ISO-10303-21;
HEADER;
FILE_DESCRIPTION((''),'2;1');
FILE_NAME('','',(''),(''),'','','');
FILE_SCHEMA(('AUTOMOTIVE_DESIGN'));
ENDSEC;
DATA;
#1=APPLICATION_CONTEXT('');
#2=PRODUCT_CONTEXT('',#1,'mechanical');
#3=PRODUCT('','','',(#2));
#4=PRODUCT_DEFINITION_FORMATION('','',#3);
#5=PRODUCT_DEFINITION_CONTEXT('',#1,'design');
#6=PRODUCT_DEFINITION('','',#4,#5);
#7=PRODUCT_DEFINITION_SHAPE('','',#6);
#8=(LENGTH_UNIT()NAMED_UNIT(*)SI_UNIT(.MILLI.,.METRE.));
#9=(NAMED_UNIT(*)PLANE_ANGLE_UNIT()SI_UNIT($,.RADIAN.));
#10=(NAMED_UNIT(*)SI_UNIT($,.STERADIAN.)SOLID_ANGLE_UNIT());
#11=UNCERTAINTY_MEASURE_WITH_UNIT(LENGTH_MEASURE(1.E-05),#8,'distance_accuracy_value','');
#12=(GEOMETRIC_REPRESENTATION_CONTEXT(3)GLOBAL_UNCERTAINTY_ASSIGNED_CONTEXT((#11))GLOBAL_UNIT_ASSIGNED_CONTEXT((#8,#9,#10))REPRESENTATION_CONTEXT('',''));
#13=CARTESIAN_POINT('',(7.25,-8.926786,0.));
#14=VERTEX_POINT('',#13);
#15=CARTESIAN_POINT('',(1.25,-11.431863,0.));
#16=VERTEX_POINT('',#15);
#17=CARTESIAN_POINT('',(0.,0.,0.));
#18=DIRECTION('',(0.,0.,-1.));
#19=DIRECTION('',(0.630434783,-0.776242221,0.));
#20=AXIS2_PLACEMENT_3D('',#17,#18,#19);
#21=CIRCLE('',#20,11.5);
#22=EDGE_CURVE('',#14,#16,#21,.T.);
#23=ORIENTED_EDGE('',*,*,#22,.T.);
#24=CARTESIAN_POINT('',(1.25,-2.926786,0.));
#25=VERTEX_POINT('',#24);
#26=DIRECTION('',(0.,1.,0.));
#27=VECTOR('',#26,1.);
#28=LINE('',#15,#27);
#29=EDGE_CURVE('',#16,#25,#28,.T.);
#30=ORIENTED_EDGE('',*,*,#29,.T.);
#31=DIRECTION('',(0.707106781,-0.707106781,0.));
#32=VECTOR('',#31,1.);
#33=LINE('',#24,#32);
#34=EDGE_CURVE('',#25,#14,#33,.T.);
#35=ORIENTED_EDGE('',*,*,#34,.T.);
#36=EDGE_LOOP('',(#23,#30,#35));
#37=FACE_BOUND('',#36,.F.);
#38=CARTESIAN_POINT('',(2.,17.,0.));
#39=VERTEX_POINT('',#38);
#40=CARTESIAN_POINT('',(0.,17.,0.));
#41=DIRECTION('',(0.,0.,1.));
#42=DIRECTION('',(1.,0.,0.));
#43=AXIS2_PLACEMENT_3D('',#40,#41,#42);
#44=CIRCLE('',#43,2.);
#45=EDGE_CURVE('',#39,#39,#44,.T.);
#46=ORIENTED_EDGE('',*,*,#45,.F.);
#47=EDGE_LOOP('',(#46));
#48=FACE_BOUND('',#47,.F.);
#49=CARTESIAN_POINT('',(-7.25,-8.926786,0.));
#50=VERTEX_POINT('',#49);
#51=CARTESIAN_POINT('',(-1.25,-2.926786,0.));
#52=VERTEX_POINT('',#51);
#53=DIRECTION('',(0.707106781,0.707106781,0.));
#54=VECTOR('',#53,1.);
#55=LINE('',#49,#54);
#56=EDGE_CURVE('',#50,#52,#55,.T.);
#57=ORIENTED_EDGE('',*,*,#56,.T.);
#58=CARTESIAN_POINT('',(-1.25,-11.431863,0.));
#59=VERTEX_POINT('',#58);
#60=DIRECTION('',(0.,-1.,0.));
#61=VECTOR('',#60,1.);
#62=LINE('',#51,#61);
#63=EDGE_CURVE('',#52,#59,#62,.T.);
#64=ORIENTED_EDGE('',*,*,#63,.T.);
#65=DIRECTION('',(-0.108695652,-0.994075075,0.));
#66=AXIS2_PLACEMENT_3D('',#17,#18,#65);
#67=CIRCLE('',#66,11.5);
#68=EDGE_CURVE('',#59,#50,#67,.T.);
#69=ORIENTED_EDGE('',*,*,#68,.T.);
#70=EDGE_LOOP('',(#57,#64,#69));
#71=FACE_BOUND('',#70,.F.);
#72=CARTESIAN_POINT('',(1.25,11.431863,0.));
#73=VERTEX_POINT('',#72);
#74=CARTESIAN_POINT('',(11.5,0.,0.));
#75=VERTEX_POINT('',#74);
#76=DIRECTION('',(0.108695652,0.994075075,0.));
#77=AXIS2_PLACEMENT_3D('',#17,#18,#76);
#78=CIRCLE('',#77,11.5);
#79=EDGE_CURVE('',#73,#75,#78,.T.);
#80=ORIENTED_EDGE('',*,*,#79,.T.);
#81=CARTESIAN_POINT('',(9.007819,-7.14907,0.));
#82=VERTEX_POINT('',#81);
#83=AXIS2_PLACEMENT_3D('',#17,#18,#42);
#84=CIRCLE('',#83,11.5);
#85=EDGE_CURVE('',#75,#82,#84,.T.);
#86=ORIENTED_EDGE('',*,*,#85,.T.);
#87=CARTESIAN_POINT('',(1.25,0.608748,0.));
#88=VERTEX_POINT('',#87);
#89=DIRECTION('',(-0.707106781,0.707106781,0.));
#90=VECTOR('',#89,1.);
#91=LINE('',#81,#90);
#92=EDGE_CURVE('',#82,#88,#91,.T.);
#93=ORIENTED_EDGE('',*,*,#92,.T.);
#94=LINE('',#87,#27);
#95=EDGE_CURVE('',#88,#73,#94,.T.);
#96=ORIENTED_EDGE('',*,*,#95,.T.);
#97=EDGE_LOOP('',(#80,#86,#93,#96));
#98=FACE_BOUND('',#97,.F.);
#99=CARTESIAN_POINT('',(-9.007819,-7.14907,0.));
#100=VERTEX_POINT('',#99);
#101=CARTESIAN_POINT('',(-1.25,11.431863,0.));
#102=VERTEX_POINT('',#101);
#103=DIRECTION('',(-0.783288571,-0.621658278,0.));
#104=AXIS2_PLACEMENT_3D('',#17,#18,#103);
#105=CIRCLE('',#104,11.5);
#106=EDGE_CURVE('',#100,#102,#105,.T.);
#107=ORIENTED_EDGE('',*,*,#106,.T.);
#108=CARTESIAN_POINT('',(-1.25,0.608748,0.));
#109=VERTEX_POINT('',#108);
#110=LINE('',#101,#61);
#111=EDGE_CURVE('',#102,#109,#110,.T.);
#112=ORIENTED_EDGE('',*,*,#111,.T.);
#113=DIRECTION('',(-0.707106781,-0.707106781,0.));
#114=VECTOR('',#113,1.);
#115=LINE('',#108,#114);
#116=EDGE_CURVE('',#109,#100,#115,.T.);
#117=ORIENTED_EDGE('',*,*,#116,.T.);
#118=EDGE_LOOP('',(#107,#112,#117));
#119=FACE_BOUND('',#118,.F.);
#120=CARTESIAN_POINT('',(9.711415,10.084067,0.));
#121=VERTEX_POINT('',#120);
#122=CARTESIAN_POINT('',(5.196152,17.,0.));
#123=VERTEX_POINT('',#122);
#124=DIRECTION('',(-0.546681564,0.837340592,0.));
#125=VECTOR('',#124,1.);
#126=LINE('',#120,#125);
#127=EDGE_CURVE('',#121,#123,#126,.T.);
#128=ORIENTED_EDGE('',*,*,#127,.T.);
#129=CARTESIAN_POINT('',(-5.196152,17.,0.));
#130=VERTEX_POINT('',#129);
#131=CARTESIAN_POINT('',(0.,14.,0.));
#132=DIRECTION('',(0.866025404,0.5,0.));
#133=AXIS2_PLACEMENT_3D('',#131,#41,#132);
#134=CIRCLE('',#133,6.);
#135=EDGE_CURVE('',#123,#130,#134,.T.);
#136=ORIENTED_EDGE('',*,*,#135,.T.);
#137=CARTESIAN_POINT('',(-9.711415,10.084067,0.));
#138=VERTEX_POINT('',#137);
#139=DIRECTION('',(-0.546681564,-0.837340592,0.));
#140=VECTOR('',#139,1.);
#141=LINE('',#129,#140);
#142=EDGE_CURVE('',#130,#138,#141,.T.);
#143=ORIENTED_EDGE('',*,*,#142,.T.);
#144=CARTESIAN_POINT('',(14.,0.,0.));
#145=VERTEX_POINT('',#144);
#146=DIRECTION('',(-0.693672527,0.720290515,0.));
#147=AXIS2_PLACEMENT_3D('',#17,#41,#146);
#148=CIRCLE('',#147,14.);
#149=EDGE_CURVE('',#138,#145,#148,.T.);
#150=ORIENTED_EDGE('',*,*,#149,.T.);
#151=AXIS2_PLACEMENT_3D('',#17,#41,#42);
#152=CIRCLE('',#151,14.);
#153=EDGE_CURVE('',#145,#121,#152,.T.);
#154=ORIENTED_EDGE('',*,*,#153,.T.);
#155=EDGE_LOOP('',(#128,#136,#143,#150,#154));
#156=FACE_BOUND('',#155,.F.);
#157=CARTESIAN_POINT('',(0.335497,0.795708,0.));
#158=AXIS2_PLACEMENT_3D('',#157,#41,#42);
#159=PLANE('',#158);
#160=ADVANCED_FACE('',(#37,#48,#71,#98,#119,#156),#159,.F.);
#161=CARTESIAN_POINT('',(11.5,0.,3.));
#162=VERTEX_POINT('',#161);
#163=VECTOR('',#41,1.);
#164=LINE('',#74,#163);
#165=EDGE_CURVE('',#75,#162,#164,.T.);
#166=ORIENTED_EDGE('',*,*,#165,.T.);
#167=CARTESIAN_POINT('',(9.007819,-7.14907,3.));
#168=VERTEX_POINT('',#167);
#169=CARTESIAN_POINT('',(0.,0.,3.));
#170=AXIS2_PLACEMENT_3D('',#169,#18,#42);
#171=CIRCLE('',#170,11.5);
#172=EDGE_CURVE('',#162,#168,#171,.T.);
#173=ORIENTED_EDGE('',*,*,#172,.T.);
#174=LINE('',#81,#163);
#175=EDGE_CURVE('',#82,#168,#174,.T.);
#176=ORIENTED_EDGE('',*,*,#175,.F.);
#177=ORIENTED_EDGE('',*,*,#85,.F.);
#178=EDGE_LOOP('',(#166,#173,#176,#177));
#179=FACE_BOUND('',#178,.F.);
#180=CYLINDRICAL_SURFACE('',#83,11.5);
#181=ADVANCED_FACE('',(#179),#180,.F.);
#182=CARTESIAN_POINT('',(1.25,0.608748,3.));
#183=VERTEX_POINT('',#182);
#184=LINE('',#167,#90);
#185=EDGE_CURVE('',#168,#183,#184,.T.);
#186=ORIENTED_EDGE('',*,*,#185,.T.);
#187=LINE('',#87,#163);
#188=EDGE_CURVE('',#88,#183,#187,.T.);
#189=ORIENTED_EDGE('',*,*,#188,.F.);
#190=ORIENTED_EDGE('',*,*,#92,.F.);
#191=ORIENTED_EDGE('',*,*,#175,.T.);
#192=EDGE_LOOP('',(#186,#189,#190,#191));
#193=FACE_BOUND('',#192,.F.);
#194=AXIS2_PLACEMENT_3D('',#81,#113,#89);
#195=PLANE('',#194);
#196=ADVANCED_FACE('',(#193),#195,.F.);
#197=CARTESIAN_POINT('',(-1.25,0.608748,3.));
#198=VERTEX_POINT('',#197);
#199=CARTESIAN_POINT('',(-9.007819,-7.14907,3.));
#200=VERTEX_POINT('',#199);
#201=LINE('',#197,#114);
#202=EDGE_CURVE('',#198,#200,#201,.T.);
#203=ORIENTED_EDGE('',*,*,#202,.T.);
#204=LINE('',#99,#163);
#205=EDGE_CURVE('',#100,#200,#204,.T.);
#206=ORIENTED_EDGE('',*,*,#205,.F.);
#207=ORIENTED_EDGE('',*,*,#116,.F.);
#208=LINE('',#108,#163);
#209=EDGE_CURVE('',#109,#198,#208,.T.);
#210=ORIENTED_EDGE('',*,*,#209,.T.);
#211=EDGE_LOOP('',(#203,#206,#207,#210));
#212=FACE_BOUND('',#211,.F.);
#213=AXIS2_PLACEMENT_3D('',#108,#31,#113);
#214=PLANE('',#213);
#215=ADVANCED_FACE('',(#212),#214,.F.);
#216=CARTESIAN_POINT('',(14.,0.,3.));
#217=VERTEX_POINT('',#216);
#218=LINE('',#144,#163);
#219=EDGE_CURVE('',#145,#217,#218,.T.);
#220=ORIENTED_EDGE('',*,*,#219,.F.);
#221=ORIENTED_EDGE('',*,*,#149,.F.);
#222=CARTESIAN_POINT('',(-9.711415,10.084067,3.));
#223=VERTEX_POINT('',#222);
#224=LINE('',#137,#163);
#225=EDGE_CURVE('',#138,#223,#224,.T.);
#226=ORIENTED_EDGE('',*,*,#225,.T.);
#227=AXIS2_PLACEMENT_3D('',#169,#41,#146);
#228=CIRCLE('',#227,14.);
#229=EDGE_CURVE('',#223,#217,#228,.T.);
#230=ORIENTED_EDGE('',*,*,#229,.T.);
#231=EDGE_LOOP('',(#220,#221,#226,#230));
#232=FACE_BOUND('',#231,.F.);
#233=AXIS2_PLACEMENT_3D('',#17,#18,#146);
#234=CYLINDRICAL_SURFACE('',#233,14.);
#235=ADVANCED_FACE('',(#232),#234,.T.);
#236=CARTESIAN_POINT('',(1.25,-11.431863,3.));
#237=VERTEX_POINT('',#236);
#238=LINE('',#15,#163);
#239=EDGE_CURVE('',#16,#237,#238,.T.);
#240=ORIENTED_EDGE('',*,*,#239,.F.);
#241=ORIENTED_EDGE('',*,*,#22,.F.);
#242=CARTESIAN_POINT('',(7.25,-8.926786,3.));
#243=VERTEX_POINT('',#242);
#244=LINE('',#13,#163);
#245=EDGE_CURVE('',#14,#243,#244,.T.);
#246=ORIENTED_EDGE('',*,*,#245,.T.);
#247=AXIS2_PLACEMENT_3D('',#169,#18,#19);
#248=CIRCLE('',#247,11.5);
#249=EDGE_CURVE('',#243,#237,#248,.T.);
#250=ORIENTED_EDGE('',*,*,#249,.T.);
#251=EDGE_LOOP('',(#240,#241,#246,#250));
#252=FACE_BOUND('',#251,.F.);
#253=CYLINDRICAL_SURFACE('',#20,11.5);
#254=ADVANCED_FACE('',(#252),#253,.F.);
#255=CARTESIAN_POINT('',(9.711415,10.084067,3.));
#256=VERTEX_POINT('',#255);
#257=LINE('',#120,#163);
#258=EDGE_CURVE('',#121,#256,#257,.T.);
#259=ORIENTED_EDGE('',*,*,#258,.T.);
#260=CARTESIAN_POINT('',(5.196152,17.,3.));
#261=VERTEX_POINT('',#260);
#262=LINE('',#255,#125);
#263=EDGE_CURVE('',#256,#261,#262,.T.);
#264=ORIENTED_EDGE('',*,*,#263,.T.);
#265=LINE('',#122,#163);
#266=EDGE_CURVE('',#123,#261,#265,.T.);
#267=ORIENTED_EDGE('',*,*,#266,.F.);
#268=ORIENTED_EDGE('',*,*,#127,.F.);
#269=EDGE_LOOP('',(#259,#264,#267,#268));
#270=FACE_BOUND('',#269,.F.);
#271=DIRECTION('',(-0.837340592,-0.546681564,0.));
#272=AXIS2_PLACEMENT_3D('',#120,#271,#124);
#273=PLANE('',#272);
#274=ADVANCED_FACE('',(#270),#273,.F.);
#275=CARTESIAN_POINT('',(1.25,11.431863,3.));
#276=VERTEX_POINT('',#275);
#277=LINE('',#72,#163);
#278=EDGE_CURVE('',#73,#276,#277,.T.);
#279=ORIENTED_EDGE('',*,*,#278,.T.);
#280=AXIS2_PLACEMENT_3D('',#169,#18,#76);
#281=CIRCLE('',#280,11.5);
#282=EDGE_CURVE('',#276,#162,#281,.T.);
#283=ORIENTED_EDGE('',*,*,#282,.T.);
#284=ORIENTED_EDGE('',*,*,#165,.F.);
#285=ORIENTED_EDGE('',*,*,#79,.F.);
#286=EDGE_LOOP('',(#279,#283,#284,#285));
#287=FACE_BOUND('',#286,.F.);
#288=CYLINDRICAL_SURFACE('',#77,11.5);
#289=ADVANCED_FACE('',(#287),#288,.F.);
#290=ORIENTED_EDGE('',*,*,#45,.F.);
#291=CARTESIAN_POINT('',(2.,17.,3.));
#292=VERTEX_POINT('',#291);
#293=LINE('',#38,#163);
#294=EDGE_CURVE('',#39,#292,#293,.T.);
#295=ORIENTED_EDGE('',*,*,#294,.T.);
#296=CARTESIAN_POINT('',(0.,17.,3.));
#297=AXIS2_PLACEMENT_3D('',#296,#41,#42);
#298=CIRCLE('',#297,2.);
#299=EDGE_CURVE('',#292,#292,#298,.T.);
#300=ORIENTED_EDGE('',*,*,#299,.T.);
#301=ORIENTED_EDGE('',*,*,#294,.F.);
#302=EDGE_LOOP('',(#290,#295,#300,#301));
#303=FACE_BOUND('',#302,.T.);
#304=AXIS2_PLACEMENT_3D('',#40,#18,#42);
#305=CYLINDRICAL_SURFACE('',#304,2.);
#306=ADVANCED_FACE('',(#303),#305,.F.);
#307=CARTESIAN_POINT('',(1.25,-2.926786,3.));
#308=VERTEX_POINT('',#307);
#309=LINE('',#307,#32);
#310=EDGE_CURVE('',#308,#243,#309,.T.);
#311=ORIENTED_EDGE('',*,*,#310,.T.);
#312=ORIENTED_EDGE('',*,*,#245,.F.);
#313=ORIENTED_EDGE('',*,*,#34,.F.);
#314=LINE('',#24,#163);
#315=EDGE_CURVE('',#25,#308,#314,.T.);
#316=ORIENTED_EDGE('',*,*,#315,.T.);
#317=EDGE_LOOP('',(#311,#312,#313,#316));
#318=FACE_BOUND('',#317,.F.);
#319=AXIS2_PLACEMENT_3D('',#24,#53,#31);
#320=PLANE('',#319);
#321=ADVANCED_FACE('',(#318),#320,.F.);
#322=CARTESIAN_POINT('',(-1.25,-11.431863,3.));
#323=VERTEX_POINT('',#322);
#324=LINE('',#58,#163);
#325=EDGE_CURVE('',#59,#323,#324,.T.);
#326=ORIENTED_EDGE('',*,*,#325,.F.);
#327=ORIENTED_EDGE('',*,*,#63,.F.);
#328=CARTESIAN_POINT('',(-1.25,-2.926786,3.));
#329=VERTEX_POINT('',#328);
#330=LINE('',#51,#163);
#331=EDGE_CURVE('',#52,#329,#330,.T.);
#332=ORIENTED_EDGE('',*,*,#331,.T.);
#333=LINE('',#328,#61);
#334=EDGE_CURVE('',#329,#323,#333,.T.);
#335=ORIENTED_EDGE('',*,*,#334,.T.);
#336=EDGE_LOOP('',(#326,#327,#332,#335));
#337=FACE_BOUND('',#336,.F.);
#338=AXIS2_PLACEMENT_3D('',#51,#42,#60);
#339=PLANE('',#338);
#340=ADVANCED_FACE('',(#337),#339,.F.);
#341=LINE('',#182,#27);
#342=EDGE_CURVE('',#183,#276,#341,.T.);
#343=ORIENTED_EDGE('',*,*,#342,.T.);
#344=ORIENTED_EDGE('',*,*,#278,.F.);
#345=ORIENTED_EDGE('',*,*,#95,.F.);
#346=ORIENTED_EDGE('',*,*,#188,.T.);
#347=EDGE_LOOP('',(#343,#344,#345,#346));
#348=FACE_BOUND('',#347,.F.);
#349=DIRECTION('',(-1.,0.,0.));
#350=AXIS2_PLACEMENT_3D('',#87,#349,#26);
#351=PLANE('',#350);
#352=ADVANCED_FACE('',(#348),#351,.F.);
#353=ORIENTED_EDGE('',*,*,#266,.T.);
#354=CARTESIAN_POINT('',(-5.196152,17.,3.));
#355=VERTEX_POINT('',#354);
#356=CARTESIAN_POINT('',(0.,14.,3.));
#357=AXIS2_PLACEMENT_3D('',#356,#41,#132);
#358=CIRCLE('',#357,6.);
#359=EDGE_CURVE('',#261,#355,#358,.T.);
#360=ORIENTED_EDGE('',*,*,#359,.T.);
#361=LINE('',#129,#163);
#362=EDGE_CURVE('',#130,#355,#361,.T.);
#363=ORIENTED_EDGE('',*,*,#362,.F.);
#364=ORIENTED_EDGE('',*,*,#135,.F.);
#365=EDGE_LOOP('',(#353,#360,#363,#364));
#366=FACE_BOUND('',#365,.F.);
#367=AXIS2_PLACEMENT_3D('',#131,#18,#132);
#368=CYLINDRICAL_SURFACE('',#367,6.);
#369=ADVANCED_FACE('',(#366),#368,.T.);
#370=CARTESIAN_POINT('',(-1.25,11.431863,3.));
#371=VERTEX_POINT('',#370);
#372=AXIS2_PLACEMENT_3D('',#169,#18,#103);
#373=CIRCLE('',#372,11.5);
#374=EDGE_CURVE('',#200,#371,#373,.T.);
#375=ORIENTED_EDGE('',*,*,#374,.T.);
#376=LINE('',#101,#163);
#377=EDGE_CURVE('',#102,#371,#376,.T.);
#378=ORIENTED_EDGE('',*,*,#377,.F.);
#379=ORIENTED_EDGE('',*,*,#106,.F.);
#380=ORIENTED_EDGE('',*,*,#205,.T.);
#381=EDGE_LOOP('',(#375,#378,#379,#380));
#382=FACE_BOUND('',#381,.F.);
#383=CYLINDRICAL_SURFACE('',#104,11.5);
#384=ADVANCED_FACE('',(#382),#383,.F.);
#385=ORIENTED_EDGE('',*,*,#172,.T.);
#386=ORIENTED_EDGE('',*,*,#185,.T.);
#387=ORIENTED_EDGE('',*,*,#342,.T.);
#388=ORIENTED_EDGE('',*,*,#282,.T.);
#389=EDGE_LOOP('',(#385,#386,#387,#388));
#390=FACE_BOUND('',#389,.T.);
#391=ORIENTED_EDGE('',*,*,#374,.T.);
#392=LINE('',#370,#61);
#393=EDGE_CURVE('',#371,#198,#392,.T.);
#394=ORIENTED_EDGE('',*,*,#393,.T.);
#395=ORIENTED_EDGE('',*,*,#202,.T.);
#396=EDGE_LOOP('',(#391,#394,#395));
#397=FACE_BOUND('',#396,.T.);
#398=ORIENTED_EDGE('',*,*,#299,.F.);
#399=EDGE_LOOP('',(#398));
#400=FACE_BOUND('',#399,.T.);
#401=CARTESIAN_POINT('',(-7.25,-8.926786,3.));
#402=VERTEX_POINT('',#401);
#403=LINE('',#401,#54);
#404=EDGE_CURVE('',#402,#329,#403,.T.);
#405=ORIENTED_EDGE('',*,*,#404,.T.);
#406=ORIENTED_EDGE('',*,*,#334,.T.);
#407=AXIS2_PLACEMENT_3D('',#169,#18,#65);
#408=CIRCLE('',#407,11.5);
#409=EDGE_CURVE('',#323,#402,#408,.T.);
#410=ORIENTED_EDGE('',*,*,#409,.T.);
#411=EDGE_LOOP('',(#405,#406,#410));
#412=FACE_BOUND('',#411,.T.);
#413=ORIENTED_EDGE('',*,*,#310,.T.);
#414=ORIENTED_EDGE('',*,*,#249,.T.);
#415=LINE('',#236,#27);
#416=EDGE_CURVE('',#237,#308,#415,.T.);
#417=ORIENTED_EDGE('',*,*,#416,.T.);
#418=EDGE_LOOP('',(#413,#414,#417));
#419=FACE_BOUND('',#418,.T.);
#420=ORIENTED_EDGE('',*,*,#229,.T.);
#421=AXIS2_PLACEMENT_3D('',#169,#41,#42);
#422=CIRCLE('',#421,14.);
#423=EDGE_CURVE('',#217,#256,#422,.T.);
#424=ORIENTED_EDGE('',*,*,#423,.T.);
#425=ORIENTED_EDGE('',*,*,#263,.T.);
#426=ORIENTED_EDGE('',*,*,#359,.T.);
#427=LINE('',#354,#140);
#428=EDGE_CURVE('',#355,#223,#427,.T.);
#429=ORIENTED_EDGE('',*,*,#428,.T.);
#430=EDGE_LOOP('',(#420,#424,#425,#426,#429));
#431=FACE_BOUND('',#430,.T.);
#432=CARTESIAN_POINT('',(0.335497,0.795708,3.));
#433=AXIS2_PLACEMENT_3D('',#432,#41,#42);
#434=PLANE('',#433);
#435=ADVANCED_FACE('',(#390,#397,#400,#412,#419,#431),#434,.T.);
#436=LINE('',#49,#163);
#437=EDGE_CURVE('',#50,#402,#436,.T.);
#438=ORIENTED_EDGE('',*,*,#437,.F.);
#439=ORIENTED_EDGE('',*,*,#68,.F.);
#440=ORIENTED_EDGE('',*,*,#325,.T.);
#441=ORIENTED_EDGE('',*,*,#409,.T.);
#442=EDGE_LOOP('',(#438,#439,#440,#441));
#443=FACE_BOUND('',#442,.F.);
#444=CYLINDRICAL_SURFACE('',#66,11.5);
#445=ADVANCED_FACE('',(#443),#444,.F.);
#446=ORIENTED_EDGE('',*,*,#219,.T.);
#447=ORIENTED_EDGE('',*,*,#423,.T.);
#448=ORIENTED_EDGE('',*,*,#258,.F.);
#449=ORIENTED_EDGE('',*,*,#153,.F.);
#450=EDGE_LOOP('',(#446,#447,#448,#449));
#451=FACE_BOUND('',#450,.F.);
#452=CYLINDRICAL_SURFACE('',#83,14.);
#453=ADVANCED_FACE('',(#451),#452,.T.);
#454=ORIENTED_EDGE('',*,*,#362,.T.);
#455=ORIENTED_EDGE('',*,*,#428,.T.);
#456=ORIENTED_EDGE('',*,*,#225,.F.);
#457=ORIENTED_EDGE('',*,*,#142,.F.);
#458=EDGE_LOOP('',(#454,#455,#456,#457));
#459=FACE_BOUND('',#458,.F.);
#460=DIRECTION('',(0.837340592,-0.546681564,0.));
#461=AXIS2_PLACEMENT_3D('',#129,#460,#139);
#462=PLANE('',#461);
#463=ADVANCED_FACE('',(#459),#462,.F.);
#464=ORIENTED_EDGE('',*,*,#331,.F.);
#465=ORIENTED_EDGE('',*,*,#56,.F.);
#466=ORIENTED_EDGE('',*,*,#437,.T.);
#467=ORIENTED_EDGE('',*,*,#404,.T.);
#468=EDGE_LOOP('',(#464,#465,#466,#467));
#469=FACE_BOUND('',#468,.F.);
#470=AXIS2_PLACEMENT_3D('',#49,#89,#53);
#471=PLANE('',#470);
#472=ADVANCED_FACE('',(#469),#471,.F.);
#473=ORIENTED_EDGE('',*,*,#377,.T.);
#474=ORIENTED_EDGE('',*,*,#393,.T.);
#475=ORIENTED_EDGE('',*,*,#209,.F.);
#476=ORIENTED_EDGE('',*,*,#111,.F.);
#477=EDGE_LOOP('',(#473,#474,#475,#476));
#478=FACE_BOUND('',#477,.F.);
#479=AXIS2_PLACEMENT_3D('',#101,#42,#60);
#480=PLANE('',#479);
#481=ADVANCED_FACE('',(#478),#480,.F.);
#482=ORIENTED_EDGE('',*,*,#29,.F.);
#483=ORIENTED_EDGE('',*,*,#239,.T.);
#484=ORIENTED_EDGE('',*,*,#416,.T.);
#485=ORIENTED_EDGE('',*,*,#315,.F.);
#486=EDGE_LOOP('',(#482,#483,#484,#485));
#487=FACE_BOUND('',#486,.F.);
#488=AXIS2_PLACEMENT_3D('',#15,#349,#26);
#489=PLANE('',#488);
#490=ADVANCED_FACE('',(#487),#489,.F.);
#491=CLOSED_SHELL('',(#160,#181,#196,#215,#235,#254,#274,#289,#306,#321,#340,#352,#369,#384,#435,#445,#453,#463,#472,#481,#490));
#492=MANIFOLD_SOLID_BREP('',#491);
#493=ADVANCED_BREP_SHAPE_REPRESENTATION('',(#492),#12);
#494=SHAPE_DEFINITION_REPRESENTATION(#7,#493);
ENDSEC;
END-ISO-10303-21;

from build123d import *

# Parameters (mm, degrees)
F1_R     = 2
F2_DEPTH = 3


with BuildPart() as f2:
    # F1 (on Top) → F2 (new body)
    with BuildSketch(Plane.XY):
        with BuildLine():
            ThreePointArc((-9.7114153746, 10.0840672063), (-5.4790594428, -12.8833189676), (14, 0))
            ThreePointArc((14, 0), (12.8833189676, 5.4790594428), (9.7114153746, 10.0840672063))
            ThreePointArc((9.7114153746, 10.0840672063), (7.8963049332, 11.5606387541), (5.8606261419, 12.7142857143))
            ThreePointArc((5.8606261419, 12.7142857143), (0, 14), (-5.8606261419, 12.7142857143))
            ThreePointArc((-5.8606261419, 12.7142857143), (-7.8963049332, 11.5606387541), (-9.7114153746, 10.0840672063))
        make_face()
        with BuildLine():
            ThreePointArc((1.25, 11.4318633652), (8.5622718948, 7.6770762664), (11.5, 0))
            ThreePointArc((11.5, 0), (10.8590955773, -3.7855043577), (9.0078185666, -7.1490701963))
            ThreePointArc((9.0078185666, -7.1490701963), (8.1773610714, -8.0858373659), (7.25, -8.9267855357))
            ThreePointArc((7.25, -8.9267855357), (4.4307283524, -10.6121932826), (1.25, -11.4318633652))
            ThreePointArc((1.25, -11.4318633652), (0, -11.5), (-1.25, -11.4318633652))
            ThreePointArc((-1.25, -11.4318633652), (-4.4307283524, -10.6121932826), (-7.25, -8.9267855357))
            ThreePointArc((-7.25, -8.9267855357), (-8.1773610714, -8.0858373659), (-9.0078185666, -7.1490701963))
            ThreePointArc((-9.0078185666, -7.1490701963), (-10.6121856109, 4.4307467271), (-1.25, 11.4318633652))
            ThreePointArc((-1.25, 11.4318633652), (0, 11.5), (1.25, 11.4318633652))
        make_face(mode=Mode.SUBTRACT)
        with BuildLine():
            ThreePointArc((5.8606261419, 12.7142857143), (7.8963049332, 11.5606387541), (9.7114153746, 10.0840672063))
            Line((9.7114153746, 10.0840672063), (5.1961524227, 17))
            ThreePointArc((5.1961524227, 17), (5.9291588604, 14.9192797226), (5.8606261419, 12.7142857143))
        make_face()
        with BuildLine():
            Line((-5.1961524227, 17), (-9.7114153746, 10.0840672063))
            ThreePointArc((-9.7114153746, 10.0840672063), (-7.8963049332, 11.5606387541), (-5.8606261419, 12.7142857143))
            ThreePointArc((-5.8606261419, 12.7142857143), (-5.9291588604, 14.9192797226), (-5.1961524227, 17))
        make_face()
        with BuildLine():
            ThreePointArc((-5.8606261419, 12.7142857143), (0, 14), (5.8606261419, 12.7142857143))
            ThreePointArc((5.8606261419, 12.7142857143), (5.9291588604, 14.9192797226), (5.1961524227, 17))
            ThreePointArc((5.1961524227, 17), (0, 20), (-5.1961524227, 17))
            ThreePointArc((-5.1961524227, 17), (-5.9291588604, 14.9192797226), (-5.8606261419, 12.7142857143))
        make_face()
        with Locations((0, 17)):
            Circle(F1_R, mode=Mode.SUBTRACT)
        with BuildLine():
            Line((1.25, 0.6087483703), (1.25, 11.4318633652))
            ThreePointArc((1.25, 11.4318633652), (0, 11.5), (-1.25, 11.4318633652))
            Line((-1.25, 11.4318633652), (-1.25, 0.6087483703))
            Line((-1.25, 0.6087483703), (-9.0078185666, -7.1490701963))
            ThreePointArc((-9.0078185666, -7.1490701963), (-8.1773610714, -8.0858373659), (-7.25, -8.9267855357))
            Line((-7.25, -8.9267855357), (-1.25, -2.9267855357))
            Line((-1.25, -2.9267855357), (-1.25, -11.4318633652))
            ThreePointArc((-1.25, -11.4318633652), (0, -11.5), (1.25, -11.4318633652))
            Line((1.25, -11.4318633652), (1.25, -2.9267855357))
            Line((1.25, -2.9267855357), (7.25, -8.9267855357))
            ThreePointArc((7.25, -8.9267855357), (8.1773610714, -8.0858373659), (9.0078185666, -7.1490701963))
            Line((9.0078185666, -7.1490701963), (1.25, 0.6087483703))
        make_face()
    extrude(amount=F2_DEPTH)


solid = f2.part
